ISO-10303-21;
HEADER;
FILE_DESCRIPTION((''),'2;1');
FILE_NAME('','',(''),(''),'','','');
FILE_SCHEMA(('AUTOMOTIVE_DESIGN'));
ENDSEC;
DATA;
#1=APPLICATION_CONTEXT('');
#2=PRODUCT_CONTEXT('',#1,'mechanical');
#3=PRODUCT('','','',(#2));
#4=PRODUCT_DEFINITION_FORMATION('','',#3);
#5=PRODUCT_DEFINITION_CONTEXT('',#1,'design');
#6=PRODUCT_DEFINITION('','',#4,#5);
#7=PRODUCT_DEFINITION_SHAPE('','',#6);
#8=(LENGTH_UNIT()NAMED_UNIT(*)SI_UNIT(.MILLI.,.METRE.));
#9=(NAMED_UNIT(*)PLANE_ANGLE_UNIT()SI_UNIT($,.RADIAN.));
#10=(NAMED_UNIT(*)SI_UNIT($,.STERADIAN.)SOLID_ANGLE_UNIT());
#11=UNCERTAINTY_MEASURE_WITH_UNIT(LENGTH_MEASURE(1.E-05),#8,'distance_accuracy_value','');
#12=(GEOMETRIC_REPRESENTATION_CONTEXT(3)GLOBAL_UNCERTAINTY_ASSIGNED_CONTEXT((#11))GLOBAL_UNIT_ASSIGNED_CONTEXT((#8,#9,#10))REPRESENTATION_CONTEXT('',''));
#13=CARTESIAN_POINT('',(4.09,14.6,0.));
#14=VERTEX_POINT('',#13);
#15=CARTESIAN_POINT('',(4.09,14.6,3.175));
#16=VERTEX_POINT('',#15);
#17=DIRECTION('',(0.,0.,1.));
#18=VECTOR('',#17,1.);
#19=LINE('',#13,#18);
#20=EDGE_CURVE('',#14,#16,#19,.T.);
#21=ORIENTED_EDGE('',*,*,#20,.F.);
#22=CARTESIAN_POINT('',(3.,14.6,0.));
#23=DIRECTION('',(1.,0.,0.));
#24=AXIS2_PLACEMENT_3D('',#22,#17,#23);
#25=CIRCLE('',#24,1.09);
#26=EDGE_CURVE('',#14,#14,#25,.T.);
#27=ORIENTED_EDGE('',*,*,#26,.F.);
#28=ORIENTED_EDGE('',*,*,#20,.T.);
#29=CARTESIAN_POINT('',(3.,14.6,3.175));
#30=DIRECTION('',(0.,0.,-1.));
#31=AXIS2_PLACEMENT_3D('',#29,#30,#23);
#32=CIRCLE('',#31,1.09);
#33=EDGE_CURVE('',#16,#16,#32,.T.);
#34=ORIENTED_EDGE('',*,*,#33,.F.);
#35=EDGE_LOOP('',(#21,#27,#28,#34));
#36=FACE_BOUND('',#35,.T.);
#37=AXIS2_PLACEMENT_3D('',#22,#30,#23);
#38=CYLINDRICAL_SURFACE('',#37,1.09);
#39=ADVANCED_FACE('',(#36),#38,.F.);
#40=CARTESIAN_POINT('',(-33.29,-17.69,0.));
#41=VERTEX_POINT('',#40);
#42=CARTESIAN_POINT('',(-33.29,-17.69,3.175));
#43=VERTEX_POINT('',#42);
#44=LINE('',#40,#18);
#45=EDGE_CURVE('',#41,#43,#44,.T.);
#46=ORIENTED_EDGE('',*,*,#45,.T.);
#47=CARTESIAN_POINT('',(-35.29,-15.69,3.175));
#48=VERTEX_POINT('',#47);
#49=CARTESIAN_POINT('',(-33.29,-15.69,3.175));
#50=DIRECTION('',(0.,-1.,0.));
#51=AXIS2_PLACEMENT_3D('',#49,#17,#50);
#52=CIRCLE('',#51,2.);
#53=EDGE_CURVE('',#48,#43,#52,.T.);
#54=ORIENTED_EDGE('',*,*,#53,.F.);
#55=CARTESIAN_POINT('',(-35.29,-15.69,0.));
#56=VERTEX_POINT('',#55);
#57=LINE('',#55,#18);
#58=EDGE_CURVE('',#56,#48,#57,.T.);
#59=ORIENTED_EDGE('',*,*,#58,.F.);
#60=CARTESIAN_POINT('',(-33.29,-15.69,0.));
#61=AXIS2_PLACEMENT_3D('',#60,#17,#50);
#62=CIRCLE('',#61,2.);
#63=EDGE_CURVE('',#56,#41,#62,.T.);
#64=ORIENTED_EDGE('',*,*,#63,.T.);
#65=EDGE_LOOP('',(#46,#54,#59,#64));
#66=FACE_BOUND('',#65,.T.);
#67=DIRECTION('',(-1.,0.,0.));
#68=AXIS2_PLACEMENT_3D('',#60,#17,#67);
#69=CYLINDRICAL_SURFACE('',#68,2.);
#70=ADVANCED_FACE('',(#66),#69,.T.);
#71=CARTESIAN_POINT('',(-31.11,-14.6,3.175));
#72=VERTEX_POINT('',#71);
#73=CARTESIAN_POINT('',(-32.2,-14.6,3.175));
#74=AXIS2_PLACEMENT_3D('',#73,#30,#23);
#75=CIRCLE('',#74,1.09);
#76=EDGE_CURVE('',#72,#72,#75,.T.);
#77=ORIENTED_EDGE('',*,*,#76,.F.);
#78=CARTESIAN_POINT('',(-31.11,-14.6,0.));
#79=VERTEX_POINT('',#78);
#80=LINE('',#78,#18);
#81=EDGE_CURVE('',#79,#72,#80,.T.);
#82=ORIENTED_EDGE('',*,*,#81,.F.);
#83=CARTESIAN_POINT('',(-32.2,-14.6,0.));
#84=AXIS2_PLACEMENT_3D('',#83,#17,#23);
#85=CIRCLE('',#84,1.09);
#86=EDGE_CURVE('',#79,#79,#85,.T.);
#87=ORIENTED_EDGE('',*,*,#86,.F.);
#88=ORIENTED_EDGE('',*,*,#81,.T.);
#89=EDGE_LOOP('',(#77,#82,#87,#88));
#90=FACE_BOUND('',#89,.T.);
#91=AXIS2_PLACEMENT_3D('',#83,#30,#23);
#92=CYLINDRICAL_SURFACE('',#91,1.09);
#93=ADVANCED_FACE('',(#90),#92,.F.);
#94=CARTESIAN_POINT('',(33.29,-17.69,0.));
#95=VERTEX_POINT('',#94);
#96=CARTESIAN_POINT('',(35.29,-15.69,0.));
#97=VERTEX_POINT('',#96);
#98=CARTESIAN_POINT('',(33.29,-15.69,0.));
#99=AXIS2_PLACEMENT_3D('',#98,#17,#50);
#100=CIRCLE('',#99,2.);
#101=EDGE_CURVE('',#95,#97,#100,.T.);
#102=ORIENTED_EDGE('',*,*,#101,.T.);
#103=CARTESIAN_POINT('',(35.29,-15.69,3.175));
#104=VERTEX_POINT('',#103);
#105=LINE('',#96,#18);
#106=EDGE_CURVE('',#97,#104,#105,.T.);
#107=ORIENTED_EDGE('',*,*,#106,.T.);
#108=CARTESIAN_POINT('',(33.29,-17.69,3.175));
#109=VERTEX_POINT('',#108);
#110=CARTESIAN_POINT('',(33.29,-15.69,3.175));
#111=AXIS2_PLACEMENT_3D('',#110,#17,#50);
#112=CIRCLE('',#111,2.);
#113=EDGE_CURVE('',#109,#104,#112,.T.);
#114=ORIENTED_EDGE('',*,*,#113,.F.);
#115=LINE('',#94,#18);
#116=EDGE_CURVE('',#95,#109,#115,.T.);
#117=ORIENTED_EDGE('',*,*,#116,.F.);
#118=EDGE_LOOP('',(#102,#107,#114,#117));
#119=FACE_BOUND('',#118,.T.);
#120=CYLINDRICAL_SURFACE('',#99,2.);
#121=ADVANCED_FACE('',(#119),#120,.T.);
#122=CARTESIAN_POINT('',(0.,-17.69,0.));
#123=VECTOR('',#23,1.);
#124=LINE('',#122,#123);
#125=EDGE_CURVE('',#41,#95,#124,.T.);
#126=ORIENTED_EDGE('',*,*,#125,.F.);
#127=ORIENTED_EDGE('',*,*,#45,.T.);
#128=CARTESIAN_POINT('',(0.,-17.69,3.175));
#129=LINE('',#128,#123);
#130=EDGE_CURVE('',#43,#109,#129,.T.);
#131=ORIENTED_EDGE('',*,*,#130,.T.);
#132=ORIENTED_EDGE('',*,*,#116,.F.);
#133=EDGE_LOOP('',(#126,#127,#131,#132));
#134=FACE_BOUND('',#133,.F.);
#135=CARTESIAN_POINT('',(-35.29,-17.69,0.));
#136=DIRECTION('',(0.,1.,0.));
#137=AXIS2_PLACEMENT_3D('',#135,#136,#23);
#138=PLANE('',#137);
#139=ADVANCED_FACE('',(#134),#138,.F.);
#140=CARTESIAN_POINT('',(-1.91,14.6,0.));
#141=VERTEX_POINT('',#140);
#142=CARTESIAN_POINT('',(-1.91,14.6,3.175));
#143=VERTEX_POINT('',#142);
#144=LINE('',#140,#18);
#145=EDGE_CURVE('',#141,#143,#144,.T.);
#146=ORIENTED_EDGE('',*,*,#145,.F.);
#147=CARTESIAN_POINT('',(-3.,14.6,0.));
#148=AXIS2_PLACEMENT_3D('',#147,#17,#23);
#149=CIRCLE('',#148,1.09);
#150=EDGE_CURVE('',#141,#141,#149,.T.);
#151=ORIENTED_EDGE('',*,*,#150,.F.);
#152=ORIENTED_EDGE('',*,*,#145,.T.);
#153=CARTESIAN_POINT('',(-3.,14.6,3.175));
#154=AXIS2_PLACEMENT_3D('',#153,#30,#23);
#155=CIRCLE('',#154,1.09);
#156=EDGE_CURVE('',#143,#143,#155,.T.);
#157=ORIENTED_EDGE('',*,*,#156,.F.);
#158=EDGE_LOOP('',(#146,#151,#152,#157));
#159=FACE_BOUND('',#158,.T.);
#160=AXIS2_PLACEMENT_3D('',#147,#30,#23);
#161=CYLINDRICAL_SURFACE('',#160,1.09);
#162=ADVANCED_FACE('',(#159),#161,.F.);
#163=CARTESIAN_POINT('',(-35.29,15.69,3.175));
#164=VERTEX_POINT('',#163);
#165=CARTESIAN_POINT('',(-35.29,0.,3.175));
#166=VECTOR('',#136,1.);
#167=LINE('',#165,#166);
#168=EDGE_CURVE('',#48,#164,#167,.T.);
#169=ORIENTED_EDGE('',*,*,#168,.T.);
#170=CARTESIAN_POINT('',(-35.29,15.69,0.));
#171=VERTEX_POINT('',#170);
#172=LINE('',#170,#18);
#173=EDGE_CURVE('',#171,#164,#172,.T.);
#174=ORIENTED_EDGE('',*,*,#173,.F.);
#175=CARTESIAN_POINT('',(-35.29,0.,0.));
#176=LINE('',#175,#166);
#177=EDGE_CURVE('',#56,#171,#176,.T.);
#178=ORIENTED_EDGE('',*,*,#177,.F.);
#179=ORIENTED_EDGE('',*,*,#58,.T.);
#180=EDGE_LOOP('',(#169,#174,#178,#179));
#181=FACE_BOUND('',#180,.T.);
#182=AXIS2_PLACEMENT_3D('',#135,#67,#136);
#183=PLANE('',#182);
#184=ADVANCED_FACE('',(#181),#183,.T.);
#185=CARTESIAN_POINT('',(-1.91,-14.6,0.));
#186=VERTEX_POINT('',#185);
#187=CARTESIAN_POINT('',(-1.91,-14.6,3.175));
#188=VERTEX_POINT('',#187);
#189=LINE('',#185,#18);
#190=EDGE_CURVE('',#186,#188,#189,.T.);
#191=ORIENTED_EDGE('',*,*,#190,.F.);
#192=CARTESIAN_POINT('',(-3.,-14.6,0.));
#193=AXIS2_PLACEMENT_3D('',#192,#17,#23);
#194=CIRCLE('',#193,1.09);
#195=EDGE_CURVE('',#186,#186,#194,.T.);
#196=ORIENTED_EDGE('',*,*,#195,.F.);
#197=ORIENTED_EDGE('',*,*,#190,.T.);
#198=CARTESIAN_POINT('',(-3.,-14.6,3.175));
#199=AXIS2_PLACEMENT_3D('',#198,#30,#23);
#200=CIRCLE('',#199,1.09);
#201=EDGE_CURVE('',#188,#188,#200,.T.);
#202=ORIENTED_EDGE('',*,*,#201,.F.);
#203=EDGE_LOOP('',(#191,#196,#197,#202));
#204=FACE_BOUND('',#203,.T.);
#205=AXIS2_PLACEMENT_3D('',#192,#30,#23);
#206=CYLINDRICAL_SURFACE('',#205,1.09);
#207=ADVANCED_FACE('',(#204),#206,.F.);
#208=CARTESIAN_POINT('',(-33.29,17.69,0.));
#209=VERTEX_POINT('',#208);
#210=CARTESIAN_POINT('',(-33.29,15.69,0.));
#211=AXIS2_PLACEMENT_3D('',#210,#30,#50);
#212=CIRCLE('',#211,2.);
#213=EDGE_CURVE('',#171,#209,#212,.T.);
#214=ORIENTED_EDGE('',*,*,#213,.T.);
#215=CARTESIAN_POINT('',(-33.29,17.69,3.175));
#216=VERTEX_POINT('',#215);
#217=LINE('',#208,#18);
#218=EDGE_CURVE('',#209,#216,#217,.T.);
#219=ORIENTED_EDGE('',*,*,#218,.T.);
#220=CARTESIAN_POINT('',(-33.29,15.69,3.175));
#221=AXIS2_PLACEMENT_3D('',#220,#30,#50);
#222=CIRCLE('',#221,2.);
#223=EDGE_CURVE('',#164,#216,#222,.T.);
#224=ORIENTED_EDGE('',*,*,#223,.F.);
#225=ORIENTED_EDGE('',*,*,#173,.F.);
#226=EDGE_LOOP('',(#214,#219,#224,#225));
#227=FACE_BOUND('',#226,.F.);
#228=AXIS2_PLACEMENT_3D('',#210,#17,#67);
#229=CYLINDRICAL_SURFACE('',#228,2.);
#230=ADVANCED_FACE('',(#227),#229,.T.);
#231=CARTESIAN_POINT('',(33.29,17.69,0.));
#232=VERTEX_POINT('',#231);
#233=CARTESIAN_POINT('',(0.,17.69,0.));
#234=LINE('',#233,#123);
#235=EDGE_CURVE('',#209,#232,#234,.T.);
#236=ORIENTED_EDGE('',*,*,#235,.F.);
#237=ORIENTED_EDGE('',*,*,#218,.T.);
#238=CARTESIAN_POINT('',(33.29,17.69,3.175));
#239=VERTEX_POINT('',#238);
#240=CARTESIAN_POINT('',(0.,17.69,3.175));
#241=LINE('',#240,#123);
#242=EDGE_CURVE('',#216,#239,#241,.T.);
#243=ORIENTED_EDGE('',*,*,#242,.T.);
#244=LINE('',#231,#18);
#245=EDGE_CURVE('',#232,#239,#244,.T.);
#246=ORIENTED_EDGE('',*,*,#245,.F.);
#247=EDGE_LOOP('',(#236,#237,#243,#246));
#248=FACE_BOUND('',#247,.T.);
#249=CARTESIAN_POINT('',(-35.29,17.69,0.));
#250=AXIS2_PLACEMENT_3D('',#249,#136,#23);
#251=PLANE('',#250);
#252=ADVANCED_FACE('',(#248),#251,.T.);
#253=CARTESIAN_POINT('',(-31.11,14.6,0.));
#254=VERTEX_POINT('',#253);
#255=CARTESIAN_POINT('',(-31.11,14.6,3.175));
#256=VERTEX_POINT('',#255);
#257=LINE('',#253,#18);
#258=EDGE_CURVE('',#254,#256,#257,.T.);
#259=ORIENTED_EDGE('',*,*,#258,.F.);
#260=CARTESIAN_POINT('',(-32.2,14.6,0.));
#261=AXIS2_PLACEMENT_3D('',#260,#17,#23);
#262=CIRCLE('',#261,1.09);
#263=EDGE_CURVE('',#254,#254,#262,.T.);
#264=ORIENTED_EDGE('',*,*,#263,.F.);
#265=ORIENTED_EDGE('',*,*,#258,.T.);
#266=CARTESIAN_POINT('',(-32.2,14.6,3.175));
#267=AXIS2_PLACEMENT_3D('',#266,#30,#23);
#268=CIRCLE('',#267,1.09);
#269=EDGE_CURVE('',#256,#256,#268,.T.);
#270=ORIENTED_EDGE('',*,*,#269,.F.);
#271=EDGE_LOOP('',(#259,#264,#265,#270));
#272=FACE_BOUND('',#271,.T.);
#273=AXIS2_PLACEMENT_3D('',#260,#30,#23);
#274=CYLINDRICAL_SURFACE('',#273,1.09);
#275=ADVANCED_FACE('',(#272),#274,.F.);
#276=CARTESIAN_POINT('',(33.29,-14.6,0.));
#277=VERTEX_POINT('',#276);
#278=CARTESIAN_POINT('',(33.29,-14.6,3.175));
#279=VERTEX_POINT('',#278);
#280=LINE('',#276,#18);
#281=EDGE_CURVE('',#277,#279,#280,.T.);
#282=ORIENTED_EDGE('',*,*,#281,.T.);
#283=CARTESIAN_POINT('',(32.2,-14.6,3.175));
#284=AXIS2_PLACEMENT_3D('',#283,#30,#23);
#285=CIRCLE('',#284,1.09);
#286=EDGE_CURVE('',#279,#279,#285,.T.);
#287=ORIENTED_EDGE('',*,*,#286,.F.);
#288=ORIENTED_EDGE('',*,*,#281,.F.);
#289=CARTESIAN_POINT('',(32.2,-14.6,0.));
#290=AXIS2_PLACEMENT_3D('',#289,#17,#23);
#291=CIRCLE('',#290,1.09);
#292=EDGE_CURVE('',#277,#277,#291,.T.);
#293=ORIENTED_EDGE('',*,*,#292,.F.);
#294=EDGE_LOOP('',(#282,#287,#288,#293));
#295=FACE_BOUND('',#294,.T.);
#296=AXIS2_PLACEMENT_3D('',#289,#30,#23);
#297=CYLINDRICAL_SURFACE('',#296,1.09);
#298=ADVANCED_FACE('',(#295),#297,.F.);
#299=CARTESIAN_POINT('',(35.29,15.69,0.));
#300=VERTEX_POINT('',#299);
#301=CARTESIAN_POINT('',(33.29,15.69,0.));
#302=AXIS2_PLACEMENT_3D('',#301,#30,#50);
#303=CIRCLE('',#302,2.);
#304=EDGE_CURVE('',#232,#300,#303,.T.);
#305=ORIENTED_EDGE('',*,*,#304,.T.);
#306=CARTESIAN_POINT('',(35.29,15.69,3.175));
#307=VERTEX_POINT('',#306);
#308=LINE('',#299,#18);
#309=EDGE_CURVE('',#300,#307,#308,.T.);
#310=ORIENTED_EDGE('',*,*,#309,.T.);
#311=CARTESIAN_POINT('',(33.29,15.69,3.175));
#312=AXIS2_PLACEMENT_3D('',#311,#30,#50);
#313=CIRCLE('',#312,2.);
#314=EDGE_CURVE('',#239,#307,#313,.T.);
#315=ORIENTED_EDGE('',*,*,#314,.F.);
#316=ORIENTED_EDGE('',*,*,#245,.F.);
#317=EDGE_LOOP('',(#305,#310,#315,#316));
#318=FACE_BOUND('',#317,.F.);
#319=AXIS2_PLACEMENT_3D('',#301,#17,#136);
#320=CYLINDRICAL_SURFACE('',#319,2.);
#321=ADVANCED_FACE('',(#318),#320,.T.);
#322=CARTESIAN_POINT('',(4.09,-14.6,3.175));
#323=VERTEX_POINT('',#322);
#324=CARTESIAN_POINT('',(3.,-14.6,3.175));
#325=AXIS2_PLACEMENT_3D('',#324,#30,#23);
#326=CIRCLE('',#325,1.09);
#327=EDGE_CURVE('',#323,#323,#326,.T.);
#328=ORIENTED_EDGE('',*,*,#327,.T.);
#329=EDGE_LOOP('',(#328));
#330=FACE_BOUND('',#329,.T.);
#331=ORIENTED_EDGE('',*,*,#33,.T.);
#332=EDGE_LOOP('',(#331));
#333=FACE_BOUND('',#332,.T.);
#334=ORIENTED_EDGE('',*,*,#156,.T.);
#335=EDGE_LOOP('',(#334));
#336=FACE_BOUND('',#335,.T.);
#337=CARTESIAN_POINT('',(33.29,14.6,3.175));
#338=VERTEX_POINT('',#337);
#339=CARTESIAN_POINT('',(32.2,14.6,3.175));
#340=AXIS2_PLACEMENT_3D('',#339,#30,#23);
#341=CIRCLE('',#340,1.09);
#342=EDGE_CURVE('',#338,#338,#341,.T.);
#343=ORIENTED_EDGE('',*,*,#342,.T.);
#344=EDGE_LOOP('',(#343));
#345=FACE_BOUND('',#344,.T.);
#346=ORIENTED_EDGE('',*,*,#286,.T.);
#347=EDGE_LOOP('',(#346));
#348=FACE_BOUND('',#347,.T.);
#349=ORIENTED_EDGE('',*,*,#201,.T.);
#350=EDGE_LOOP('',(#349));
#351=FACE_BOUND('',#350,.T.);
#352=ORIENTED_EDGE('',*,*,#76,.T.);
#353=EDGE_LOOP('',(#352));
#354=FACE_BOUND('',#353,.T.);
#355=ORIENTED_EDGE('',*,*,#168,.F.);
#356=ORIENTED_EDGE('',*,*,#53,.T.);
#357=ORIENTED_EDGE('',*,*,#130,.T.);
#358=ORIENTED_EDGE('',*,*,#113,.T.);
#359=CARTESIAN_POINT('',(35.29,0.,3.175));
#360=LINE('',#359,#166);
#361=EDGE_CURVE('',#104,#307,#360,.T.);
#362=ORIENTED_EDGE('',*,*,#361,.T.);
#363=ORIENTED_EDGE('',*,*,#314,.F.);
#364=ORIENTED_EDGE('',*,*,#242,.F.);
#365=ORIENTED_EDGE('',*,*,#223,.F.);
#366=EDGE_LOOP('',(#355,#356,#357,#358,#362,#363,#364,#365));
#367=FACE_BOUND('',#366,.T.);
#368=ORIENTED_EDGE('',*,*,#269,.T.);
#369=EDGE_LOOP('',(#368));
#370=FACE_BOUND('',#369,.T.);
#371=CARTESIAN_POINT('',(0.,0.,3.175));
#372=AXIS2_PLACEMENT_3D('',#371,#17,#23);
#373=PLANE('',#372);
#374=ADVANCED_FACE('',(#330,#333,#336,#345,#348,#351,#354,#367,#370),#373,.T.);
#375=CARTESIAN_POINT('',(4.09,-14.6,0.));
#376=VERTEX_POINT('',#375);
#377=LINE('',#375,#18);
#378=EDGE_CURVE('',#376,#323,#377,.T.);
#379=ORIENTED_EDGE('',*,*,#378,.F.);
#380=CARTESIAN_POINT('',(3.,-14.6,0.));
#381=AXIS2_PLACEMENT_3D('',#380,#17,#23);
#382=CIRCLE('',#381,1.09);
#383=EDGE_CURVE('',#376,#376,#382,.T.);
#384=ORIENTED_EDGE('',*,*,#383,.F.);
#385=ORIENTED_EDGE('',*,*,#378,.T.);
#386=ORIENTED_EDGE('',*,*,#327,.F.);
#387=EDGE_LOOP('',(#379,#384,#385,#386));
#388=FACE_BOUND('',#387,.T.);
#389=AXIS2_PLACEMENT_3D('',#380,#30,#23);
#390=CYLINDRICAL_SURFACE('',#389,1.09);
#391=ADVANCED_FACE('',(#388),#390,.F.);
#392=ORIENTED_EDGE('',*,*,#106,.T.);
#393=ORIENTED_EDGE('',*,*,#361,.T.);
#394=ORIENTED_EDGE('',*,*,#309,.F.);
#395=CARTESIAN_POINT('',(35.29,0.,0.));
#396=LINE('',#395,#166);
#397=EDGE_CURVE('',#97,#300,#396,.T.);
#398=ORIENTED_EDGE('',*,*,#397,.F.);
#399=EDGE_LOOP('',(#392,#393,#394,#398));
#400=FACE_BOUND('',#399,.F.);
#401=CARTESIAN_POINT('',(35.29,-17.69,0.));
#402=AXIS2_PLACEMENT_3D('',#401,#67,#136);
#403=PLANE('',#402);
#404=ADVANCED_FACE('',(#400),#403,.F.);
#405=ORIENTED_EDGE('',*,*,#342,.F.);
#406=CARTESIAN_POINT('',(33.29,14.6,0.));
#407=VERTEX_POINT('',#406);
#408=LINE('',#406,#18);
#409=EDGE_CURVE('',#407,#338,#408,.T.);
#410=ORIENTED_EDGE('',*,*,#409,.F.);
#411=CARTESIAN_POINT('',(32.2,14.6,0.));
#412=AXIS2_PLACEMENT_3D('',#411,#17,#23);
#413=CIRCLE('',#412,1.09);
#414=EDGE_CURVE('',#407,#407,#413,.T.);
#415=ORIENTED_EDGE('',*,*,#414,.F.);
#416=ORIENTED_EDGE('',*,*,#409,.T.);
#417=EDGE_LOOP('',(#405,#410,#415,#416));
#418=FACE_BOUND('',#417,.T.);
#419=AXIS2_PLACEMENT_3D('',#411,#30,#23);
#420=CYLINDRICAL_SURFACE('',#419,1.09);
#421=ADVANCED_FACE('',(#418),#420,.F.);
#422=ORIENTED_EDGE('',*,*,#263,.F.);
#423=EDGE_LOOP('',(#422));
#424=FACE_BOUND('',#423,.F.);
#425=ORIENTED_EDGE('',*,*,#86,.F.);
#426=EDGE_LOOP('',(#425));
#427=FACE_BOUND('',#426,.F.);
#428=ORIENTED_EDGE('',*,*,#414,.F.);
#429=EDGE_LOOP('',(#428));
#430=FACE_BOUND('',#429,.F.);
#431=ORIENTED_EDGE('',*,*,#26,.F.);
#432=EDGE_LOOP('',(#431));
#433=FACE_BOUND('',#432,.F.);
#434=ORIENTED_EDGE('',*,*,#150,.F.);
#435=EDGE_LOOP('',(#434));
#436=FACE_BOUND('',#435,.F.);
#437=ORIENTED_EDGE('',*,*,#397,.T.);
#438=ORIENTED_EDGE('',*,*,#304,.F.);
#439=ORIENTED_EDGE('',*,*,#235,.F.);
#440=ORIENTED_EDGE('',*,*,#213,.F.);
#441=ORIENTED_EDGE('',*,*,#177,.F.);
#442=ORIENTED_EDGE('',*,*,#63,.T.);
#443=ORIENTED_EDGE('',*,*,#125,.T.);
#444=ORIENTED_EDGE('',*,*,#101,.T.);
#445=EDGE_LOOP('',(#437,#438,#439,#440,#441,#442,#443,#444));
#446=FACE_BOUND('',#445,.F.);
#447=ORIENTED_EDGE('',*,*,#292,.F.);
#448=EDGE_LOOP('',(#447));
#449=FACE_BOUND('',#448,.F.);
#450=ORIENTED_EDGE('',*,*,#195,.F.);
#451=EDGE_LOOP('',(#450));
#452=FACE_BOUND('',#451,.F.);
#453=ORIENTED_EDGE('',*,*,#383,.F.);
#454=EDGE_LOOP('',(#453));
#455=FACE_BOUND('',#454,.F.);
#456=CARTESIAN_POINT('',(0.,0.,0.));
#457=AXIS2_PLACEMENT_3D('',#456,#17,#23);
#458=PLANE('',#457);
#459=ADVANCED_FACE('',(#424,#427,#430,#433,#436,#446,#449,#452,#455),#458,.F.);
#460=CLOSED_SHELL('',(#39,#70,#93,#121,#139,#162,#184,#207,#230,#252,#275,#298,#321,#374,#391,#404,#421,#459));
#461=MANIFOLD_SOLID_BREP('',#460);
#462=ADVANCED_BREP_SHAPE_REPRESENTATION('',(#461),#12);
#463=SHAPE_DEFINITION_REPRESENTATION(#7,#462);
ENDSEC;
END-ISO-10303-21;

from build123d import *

# Parameters (mm, degrees)
F1_W     = 70.58
F1_H     = 35.38
F2_DEPTH = 3.175
F0_R     = 1.09
F3_DEPTH = 3.176
F4_R     = 2


# Not quite as in the source:
# - a length typed as a fraction of an inch, garbled in the dataset ("3 / 203.2 mm" for 3/8 in), is restored


with BuildPart() as f2:
    # F1 (on Top) → F2 (new body)
    with BuildSketch(Plane.XY):
        Rectangle(F1_W, F1_H)
    extrude(amount=F2_DEPTH)

    # F0 (on Top) → F3 (cut, through all)
    with BuildSketch(Plane.XY):
        with Locations((-3, 14.6)):
            Circle(F0_R)
        with Locations((-3, -14.6)):
            Circle(F0_R)
        with Locations((-32.2, -14.6)):
            Circle(F0_R)
        with Locations((32.2, 14.6)):
            Circle(F0_R)
        with Locations((32.2, -14.6)):
            Circle(F0_R)
        with Locations((3, -14.6)):
            Circle(F0_R)
        with Locations((-32.2, 14.6)):
            Circle(F0_R)
        with Locations((3, 14.6)):
            Circle(F0_R)
    extrude(amount=F3_DEPTH, mode=Mode.SUBTRACT)

    # F4
    f4_edges = [f2.edges().sort_by_distance(p)[0] for p in [
        (-35.29, -17.69, 1.5875),
        (-35.29, 17.69, 1.5875),
        (35.29, 17.69, 1.5875),
        (35.29, -17.69, 1.5875),
    ]]
    fillet(f4_edges, radius=F4_R)


solid = f2.part
